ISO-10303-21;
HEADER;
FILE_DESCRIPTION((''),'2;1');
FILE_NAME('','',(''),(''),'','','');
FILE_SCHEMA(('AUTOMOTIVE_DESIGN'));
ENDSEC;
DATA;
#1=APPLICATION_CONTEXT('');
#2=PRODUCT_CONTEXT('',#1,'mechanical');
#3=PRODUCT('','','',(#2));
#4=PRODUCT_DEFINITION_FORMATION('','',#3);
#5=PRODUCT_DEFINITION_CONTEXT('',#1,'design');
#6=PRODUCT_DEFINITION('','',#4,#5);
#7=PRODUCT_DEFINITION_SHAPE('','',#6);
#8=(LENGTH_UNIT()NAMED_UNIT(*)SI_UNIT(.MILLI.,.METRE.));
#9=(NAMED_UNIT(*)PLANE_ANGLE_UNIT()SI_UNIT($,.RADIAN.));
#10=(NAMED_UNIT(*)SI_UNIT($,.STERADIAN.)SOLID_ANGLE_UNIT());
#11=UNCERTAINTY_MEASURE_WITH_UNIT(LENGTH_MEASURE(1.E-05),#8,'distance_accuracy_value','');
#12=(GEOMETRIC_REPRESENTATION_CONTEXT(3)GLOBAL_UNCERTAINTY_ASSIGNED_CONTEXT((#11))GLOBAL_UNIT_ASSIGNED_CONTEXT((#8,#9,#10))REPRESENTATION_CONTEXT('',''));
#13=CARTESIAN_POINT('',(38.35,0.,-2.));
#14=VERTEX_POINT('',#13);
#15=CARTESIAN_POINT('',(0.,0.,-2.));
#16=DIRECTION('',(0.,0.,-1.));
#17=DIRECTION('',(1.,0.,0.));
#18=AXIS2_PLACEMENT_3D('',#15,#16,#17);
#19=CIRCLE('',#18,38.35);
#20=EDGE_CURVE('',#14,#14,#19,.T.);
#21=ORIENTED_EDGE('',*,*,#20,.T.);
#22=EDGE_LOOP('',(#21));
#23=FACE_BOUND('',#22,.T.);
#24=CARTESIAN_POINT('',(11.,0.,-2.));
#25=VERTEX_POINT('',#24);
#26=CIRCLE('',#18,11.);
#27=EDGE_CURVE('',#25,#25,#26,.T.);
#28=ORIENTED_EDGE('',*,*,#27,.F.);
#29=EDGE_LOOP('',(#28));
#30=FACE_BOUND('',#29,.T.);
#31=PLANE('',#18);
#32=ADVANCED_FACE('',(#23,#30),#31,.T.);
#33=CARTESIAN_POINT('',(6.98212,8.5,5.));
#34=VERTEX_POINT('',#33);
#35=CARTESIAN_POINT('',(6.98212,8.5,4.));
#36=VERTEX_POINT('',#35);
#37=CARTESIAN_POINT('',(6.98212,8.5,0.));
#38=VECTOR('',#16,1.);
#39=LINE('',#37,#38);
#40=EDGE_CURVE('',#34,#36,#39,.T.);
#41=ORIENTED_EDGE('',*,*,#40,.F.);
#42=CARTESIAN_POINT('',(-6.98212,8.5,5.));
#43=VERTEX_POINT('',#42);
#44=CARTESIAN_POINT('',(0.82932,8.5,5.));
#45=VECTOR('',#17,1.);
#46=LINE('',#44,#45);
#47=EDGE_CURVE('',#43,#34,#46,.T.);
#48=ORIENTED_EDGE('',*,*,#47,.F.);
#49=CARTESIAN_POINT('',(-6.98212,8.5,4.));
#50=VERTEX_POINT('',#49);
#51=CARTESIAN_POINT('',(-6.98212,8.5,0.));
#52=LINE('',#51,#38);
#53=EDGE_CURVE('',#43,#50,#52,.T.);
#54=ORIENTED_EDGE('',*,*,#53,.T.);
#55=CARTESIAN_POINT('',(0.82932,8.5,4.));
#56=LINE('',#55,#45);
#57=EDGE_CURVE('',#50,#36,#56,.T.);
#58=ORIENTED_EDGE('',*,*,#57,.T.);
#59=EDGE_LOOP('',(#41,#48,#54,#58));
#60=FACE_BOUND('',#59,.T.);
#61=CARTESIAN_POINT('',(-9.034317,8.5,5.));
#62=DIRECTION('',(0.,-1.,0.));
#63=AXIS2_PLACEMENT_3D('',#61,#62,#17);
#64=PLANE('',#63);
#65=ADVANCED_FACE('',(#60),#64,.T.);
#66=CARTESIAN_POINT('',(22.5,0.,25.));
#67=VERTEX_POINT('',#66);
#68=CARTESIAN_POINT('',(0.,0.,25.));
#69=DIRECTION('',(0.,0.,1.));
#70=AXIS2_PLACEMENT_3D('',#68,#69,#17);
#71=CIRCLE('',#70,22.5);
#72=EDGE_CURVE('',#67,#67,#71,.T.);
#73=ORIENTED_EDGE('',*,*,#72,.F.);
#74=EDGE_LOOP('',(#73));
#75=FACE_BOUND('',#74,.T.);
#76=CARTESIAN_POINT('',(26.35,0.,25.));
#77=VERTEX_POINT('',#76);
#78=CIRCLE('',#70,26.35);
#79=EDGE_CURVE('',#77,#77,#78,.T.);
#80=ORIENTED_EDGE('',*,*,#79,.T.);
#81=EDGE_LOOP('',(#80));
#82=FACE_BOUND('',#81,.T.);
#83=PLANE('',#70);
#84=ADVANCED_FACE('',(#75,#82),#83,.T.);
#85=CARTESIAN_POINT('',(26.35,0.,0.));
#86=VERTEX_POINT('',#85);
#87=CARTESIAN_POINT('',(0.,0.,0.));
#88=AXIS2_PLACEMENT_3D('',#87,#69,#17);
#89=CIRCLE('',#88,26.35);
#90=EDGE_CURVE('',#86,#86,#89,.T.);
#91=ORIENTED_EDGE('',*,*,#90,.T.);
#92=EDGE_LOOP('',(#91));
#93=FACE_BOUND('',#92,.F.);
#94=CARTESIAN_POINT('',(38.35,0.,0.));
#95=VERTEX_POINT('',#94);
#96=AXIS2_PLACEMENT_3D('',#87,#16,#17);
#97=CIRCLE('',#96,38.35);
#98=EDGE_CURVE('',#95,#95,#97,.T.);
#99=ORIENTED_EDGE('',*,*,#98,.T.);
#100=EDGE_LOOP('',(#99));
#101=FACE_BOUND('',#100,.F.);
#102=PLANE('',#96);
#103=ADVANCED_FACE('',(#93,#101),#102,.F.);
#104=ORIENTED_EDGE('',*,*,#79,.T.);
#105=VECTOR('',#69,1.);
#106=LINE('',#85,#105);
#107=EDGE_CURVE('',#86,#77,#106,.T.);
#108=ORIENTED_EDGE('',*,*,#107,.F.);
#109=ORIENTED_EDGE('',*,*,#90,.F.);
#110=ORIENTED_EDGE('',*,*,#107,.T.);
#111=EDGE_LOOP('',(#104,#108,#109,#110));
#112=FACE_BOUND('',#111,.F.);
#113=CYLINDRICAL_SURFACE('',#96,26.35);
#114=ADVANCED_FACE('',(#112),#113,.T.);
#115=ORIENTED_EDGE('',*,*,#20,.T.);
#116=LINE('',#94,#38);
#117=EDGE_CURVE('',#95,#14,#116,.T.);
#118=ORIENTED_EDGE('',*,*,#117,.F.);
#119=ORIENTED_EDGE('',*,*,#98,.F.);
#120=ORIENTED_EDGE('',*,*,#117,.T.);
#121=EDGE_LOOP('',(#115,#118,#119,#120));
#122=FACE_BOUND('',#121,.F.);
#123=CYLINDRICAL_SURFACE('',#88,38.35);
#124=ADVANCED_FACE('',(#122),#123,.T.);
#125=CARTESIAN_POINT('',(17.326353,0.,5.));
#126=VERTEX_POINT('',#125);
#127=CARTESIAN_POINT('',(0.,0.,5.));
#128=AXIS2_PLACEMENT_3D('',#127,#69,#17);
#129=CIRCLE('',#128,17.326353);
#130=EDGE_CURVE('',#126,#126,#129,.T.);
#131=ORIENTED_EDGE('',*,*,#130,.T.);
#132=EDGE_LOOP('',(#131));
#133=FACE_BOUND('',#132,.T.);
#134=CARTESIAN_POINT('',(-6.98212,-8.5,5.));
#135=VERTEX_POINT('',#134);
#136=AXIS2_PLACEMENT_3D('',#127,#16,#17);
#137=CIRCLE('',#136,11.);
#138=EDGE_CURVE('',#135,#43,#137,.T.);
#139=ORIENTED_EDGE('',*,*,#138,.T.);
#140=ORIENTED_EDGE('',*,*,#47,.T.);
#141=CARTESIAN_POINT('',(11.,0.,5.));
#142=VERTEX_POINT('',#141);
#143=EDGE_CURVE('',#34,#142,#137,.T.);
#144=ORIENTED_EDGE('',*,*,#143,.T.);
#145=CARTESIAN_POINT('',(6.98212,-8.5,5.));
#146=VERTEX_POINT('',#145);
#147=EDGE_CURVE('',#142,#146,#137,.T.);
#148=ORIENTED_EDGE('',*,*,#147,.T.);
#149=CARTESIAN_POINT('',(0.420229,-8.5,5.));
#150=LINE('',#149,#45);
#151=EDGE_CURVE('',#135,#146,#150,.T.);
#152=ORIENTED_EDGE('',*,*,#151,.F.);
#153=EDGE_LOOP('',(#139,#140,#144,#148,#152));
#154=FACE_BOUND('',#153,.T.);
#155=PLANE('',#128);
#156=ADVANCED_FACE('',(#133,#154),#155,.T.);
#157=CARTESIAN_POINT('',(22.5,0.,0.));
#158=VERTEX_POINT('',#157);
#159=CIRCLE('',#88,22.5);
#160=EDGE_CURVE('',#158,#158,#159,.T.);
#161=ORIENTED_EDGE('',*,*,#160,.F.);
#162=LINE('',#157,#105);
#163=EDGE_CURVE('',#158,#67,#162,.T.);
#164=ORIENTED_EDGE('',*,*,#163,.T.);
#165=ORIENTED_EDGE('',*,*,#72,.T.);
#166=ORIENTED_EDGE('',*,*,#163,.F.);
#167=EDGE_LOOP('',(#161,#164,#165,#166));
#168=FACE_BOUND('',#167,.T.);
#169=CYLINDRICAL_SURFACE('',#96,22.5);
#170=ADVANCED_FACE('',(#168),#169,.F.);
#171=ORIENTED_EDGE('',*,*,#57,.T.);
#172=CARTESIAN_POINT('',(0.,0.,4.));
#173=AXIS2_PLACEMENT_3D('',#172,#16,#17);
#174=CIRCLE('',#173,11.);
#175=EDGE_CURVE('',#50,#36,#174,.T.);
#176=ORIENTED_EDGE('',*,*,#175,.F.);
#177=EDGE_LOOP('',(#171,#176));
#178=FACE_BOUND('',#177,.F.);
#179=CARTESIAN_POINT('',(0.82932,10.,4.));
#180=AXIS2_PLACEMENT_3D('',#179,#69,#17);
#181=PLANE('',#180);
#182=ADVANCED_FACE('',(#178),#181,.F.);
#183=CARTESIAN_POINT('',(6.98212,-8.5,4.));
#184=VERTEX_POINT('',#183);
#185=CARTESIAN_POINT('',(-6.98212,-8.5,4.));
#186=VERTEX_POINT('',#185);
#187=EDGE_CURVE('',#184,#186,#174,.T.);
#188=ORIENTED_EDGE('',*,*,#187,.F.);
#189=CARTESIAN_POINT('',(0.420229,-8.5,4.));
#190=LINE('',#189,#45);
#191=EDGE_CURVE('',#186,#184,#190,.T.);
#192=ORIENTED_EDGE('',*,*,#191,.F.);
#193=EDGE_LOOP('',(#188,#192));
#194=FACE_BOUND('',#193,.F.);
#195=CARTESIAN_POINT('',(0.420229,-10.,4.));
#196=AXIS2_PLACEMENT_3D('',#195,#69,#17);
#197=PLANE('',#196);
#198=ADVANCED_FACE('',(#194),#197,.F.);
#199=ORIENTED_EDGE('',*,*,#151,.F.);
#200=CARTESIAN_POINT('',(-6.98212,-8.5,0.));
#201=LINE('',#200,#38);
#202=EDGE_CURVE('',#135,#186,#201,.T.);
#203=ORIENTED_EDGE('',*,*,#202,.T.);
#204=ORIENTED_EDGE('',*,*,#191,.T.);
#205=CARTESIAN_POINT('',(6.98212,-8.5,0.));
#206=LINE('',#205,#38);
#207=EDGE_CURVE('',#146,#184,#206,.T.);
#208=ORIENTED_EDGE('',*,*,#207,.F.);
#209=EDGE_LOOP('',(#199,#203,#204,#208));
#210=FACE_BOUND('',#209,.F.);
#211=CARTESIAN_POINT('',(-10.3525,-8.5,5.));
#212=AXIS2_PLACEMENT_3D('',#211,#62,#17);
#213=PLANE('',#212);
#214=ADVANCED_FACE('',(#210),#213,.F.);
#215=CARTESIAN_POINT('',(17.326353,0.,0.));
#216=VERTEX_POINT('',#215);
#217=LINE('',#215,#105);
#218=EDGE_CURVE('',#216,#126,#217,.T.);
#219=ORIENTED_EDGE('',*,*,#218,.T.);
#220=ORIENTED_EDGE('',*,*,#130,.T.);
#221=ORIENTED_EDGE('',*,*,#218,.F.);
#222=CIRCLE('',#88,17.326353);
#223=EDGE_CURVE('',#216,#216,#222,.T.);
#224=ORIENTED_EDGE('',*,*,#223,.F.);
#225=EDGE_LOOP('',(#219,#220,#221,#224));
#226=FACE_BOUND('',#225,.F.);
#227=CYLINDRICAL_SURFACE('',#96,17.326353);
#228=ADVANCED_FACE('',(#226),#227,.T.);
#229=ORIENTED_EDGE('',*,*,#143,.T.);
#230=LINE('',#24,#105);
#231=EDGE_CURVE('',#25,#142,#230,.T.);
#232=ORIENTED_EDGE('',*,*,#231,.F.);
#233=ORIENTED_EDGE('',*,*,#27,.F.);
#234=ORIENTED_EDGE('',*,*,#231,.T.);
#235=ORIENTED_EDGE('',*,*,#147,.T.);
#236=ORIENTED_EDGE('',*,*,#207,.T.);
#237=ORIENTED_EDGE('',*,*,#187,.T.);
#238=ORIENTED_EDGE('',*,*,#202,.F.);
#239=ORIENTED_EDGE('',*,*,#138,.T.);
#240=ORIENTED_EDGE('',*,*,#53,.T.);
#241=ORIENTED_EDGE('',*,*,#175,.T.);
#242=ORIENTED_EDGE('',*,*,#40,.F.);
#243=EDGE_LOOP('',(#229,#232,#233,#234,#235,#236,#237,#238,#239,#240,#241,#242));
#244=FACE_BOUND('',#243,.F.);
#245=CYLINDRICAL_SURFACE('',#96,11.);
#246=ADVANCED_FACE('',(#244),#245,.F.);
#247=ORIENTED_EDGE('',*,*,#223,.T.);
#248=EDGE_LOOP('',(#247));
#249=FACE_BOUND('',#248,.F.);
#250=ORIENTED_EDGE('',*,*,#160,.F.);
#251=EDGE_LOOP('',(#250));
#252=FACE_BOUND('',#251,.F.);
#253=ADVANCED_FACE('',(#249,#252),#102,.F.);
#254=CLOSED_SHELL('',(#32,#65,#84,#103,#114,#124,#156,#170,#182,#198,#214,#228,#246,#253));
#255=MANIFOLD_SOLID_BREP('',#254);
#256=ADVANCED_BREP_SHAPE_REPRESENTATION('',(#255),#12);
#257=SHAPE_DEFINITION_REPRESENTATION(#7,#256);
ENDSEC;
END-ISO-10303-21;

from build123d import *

# Parameters (mm, degrees)
F0_R      = 26.35
F0_R_2    = 22.5
F1_DEPTH  = 25
F2_R      = 38.35
F2_R_2    = 26.35
F2_R_3    = 22.5
F3_DEPTH  = 2
F4_R      = 11
F5_DEPTH  = 25
F6_R      = 17.3263528998
F7_DEPTH  = 5
F8_R      = 11
F9_DEPTH  = 25
F10_W     = 19.7272742478
F10_H     = 3
F10_W_2   = 21.5454568693
F11_DEPTH = 1


with BuildPart() as f1:
    # F0 (on Top) → F1 (new body)
    with BuildSketch(Plane.XY):
        Circle(F0_R)
        Circle(F0_R_2, mode=Mode.SUBTRACT)
    extrude(amount=F1_DEPTH)

    # F2 (on face) → F3 (join)
    with BuildSketch(Plane(origin=(0, 0, 0), x_dir=(1, 0, 0), z_dir=(0, 0, -1))):
        Circle(F2_R)
        Circle(F2_R_2, mode=Mode.SUBTRACT)
        Circle(F2_R_2)
        Circle(F2_R_3, mode=Mode.SUBTRACT)
        Circle(F2_R_3)
    extrude(amount=F3_DEPTH)

    # F4 (on face) → F5 (cut)
    with BuildSketch(Plane(origin=(0, 0, -2), x_dir=(1, 0, 0), z_dir=(0, 0, -1))):
        Circle(F4_R)
    extrude(amount=-F5_DEPTH, mode=Mode.SUBTRACT)

    # F6 (on face) → F7 (join)
    with BuildSketch(Plane.XY):
        Circle(F6_R)
    extrude(amount=F7_DEPTH)

    # F8 (on face) → F9 (cut)
    with BuildSketch(Plane(origin=(0, 0, 0), x_dir=(1, 0, 0), z_dir=(0, 0, -1))):
        Circle(F8_R)
    extrude(amount=-F9_DEPTH, mode=Mode.SUBTRACT)

    # F10 (on face) → F11 (join)
    with BuildSketch(Plane.XY.offset(5)):
        with Locations((0.8293200467, 10)):
            Rectangle(F10_W, F10_H)
        with Locations((0.4202285782, -10)):
            Rectangle(F10_W_2, F10_H)
    extrude(amount=-F11_DEPTH)


solid = f1.part
